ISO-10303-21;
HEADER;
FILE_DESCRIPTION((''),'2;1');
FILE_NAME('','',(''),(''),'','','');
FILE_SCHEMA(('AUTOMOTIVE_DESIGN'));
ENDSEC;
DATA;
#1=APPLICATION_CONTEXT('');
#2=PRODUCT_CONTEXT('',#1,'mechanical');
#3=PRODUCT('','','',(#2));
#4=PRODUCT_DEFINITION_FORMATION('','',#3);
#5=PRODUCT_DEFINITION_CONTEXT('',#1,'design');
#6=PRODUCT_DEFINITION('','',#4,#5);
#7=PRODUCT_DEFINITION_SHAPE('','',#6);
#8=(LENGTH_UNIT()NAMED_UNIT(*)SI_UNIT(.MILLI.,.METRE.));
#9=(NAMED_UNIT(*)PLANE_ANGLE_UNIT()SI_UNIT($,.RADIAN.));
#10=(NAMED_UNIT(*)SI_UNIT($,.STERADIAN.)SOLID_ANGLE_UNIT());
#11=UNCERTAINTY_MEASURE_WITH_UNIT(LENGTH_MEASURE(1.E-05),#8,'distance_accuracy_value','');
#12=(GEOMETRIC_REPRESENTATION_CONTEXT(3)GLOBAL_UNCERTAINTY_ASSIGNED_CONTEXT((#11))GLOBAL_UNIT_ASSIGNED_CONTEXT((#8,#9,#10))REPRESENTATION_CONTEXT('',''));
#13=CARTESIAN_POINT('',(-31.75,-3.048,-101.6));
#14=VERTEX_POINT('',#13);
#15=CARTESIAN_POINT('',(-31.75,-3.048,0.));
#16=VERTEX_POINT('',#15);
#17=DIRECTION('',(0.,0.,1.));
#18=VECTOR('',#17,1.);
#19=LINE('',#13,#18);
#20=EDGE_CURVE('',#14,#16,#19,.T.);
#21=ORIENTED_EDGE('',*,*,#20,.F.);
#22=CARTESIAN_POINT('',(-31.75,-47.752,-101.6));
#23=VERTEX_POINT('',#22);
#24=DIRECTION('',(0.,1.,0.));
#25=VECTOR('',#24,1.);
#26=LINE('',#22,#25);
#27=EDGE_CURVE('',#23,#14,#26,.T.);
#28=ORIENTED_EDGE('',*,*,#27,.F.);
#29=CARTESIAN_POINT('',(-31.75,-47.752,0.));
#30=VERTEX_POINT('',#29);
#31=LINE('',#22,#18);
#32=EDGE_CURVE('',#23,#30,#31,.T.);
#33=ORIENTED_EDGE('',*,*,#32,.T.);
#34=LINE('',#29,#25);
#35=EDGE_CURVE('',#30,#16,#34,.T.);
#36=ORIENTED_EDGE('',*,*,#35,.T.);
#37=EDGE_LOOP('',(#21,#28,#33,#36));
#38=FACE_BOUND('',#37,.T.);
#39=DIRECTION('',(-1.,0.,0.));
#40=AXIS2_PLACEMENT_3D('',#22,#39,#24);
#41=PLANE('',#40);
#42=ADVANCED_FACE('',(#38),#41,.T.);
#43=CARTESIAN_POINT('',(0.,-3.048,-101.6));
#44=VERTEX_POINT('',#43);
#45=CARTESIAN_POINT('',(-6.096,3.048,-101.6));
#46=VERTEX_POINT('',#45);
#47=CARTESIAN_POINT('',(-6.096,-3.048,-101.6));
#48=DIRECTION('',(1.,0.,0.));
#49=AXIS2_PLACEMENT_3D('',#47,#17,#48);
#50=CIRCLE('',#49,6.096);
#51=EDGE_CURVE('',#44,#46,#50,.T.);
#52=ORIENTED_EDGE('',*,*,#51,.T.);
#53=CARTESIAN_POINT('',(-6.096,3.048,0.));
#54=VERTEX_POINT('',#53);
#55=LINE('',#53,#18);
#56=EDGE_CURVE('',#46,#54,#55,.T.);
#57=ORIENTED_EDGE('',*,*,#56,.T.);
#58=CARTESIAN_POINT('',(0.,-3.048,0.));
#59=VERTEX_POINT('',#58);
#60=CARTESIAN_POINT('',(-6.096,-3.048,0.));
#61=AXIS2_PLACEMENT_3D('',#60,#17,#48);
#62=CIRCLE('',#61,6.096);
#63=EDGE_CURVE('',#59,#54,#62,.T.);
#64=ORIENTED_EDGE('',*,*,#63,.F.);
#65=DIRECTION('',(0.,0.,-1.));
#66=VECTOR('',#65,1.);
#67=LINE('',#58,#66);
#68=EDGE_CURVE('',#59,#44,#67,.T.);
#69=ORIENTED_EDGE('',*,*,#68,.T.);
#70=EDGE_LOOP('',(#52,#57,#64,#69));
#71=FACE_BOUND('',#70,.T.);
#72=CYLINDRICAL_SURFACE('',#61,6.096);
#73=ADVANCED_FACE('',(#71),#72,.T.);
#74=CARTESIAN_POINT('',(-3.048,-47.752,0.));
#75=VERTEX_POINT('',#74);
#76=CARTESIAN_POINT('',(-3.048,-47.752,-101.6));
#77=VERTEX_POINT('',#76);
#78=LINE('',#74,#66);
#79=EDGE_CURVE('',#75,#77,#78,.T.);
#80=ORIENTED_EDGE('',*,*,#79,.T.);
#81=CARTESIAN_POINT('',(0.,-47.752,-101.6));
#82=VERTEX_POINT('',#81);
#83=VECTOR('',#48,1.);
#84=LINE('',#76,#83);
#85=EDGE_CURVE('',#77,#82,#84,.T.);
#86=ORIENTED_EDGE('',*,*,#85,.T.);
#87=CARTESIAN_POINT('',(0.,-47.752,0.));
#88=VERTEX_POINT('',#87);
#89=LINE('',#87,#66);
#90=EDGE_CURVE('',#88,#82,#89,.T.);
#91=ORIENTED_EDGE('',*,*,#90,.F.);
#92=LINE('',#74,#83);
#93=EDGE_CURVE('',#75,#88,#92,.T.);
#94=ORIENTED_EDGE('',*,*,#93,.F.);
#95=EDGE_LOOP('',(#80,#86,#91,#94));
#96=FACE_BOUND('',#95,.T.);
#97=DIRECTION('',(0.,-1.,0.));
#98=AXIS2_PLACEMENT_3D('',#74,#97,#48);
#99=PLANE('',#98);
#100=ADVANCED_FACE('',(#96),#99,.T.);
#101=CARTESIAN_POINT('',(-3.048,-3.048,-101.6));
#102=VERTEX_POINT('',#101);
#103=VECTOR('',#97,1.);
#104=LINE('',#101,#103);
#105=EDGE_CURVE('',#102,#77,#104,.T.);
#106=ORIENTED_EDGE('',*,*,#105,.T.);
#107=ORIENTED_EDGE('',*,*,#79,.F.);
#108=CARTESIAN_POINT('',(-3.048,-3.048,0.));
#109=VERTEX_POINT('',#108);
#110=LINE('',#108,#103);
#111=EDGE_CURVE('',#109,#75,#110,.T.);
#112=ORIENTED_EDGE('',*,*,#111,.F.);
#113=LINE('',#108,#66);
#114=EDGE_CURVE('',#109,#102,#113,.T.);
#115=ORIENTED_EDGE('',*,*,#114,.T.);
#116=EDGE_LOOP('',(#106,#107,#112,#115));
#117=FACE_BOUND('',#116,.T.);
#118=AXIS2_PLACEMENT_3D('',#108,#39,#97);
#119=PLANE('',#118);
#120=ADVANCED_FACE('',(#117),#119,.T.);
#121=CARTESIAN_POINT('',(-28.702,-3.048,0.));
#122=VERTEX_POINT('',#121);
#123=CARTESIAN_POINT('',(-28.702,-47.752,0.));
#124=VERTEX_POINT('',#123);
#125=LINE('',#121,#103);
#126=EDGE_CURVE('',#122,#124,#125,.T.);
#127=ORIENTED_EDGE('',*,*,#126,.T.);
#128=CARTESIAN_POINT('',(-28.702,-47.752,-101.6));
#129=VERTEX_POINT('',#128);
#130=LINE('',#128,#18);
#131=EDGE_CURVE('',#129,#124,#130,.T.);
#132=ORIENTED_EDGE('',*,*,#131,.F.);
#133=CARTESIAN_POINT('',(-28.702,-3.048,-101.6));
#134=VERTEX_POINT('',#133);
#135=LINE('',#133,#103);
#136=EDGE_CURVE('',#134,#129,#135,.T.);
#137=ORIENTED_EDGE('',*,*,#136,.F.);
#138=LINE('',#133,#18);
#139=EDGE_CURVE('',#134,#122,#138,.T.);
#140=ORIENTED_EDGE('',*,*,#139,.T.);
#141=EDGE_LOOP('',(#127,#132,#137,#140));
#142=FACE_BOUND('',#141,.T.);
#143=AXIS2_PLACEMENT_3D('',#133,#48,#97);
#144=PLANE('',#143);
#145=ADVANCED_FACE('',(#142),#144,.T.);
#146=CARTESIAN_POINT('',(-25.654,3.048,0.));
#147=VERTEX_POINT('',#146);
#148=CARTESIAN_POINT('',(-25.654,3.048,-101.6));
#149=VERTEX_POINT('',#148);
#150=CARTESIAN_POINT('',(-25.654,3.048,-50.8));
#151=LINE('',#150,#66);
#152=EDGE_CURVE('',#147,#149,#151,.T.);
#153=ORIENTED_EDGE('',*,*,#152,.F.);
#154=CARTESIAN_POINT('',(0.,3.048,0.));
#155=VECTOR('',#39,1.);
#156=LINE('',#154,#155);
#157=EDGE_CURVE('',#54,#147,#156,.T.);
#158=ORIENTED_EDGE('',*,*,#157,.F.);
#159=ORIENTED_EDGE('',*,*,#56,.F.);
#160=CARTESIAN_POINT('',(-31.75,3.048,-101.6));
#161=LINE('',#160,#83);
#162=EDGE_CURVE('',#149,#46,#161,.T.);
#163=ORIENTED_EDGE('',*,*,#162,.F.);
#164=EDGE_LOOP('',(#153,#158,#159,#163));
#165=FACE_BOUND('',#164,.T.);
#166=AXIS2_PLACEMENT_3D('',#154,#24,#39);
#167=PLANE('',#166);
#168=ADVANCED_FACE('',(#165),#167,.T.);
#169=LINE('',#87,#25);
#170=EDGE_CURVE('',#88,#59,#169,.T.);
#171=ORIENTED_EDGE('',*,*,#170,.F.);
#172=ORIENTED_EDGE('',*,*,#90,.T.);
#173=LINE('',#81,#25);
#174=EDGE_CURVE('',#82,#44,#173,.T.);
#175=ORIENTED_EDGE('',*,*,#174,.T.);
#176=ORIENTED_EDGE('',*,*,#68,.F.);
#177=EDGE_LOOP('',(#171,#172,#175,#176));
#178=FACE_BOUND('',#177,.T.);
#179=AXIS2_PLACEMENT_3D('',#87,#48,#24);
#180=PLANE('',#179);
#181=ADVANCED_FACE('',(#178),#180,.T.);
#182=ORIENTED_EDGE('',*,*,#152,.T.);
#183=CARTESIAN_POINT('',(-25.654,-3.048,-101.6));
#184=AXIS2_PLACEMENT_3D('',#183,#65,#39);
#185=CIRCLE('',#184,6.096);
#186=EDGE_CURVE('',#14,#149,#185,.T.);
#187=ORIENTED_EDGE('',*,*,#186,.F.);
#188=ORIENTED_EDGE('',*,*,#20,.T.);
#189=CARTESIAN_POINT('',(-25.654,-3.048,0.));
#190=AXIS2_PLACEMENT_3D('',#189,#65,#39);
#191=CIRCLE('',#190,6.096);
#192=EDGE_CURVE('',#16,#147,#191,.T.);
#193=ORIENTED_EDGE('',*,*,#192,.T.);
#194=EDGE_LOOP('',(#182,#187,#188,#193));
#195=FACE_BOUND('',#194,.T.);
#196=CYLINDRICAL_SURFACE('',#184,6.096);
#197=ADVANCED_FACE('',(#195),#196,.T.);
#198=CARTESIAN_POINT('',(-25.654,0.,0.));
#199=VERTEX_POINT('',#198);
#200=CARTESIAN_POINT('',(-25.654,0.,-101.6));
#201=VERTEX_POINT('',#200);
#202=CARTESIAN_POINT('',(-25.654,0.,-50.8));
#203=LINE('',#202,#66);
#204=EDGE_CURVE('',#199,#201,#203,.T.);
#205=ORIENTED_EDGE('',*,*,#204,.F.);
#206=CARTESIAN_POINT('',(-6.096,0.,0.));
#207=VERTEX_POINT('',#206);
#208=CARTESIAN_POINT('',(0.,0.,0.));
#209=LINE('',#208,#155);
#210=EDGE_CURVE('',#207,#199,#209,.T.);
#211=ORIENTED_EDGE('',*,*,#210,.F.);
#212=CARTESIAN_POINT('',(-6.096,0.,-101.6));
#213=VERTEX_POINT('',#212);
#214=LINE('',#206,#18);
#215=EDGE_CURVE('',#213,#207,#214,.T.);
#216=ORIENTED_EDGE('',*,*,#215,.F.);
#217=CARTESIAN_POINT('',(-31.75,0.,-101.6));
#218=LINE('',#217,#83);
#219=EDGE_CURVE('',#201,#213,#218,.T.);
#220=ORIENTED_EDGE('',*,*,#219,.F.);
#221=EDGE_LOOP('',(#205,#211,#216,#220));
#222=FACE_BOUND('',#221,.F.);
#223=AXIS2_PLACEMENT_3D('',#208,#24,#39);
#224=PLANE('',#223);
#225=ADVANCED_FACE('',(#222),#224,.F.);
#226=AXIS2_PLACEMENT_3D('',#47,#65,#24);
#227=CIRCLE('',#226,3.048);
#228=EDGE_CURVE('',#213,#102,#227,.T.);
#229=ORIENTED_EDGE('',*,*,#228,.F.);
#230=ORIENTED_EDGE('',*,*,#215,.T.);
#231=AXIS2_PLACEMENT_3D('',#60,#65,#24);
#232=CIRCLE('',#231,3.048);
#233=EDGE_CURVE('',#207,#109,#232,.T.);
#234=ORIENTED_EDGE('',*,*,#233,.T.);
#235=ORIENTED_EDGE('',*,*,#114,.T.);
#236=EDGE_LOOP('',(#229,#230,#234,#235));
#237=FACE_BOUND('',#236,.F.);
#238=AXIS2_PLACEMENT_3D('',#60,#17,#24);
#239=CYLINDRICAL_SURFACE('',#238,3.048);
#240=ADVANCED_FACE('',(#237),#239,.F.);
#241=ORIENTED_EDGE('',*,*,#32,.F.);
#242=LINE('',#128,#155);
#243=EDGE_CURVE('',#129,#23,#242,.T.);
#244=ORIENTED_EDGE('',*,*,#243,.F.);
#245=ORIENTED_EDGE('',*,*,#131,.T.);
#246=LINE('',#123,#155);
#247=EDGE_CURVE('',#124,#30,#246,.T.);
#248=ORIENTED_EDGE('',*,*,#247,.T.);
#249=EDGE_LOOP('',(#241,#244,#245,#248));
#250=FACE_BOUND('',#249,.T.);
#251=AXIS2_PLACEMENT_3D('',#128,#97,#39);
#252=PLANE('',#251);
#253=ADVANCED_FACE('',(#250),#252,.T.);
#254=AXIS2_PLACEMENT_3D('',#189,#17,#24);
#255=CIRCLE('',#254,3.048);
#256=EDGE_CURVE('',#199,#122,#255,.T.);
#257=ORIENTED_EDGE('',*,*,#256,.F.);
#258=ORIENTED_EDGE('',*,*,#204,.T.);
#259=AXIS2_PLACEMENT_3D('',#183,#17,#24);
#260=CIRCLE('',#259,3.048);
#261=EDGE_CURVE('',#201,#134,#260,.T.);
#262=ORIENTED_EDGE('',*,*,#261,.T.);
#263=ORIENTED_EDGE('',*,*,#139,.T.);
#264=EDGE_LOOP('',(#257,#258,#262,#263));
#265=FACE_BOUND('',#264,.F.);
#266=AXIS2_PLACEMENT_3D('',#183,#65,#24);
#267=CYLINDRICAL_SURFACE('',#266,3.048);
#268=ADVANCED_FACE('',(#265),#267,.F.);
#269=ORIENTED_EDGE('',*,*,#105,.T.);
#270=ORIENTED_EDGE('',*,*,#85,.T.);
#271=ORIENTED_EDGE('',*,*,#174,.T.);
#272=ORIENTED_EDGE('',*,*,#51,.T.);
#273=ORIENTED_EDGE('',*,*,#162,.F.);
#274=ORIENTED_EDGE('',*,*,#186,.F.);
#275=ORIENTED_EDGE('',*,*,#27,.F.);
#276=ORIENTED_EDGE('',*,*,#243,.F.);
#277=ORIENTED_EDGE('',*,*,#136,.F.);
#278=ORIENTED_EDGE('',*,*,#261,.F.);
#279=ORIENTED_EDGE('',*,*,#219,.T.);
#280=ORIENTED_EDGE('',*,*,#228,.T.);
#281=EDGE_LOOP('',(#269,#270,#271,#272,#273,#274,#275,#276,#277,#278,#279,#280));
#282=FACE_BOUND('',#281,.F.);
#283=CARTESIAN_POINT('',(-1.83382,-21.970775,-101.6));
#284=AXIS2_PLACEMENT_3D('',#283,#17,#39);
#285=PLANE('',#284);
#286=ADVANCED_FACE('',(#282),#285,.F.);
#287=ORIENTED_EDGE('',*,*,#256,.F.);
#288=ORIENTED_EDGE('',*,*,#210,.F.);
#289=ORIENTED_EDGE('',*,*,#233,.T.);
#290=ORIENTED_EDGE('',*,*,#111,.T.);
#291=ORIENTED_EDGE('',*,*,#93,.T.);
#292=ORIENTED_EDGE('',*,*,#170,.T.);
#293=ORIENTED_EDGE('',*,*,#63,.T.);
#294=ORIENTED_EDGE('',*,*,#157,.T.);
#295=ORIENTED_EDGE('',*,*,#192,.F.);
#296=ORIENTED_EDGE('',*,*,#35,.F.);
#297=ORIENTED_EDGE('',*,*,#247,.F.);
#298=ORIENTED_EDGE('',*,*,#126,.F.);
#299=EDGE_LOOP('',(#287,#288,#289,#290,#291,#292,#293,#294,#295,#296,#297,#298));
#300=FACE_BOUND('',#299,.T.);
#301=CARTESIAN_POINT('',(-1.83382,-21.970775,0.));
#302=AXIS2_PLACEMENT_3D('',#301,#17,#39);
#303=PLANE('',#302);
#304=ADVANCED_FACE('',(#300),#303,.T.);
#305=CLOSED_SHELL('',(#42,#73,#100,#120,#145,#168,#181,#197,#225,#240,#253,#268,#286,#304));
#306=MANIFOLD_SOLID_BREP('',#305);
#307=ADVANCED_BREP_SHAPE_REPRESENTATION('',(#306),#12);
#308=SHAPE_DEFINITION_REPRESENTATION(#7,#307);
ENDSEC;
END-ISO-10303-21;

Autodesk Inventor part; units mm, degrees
ref_plane "YZ Plane" through (0, 0, 0) normal (1, 0, 0) x (0, 1, 0)
ref_plane "XZ Plane" through (0, 0, 0) normal (0, 1, 0) x (-1, 0, 0)
ref_plane "XY Plane" through (0, 0, 0) normal (0, 0, 1) x (1, 0, 0)
sketch "Sketch1" plane through (0, 0, 0) normal (0, 1, 0) x (-1, 0, 0)
  line L0 (0, 0) -> (31.75, 0)
  line L1 (31.75, 0) -> (31.75, -101.6)
  line L2 (31.75, -101.6) -> (0, -101.6)
  line L3 (0, -101.6) -> (0, 0)
  dimension "d0" = 31.75
  dimension "d1" = 101.6
extrude "Plate1" add sketch "Sketch1" along normal blind 3.048
sketch "Sketch2" plane through (-3.048, 3.048, 0) normal (1, 0, 0) x (0, 1, 0)
  line L0 (0, -101.6) -> (0, 0)
  line L1 (0, 0) -> (-50.8, 0)
  line L2 (-50.8, 0) -> (-50.8, -101.6)
  line L3 (-50.8, -101.6) -> (0, -101.6)
edge flange "Flange1" height 50.8 angle 90 thickness 3.048 bend radius 3.048 thickness toward (1, 0, 0) relief tear relief width 3.048 relief depth 1.524 corner gap 3.048 corner form 0 edges at (0, 0, -50.8) (-31.75, 0, -50.8) wall of the first edge with corners at (-3.048, 3.048, -101.6) (-3.048, 3.048, 0) (-3.048, -47.752, 0) (-3.048, -47.752, -101.6)
bend "Bend1"
corner "Corner1"
equation "\"d3\" = BendReliefWidth"
equation "\"d4\" = BendReliefDepth"
equation "\"d5\" = MinimumRemnant"
equation "\"d6\" = BendRadius"
equation "\"d9\" = BendRadius"
equation "\"d10\" = CornerReliefSize"
equation "\"d11\" = GapSize"
equation "\"d12\" = JacobiRadiusSize"
equation "\"BendRadius\" = Thickness"
equation "\"BendReliefWidth\" = Thickness"
equation "\"BendReliefDepth\" = 0.5 * Thickness"
equation "\"CornerReliefSize\" = 4 * Thickness"
equation "\"MinimumRemnant\" = 2 * Thickness"
equation "\"TransitionRadius\" = BendRadius"
equation "\"JacobiRadiusSize\" = BendRadius"
equation "\"GapSize\" = Thickness"
equation "\"d2\" = BendRadius"
equation "\"Thickness\" = 3.048"
properties part number "aFrameBrace1"
